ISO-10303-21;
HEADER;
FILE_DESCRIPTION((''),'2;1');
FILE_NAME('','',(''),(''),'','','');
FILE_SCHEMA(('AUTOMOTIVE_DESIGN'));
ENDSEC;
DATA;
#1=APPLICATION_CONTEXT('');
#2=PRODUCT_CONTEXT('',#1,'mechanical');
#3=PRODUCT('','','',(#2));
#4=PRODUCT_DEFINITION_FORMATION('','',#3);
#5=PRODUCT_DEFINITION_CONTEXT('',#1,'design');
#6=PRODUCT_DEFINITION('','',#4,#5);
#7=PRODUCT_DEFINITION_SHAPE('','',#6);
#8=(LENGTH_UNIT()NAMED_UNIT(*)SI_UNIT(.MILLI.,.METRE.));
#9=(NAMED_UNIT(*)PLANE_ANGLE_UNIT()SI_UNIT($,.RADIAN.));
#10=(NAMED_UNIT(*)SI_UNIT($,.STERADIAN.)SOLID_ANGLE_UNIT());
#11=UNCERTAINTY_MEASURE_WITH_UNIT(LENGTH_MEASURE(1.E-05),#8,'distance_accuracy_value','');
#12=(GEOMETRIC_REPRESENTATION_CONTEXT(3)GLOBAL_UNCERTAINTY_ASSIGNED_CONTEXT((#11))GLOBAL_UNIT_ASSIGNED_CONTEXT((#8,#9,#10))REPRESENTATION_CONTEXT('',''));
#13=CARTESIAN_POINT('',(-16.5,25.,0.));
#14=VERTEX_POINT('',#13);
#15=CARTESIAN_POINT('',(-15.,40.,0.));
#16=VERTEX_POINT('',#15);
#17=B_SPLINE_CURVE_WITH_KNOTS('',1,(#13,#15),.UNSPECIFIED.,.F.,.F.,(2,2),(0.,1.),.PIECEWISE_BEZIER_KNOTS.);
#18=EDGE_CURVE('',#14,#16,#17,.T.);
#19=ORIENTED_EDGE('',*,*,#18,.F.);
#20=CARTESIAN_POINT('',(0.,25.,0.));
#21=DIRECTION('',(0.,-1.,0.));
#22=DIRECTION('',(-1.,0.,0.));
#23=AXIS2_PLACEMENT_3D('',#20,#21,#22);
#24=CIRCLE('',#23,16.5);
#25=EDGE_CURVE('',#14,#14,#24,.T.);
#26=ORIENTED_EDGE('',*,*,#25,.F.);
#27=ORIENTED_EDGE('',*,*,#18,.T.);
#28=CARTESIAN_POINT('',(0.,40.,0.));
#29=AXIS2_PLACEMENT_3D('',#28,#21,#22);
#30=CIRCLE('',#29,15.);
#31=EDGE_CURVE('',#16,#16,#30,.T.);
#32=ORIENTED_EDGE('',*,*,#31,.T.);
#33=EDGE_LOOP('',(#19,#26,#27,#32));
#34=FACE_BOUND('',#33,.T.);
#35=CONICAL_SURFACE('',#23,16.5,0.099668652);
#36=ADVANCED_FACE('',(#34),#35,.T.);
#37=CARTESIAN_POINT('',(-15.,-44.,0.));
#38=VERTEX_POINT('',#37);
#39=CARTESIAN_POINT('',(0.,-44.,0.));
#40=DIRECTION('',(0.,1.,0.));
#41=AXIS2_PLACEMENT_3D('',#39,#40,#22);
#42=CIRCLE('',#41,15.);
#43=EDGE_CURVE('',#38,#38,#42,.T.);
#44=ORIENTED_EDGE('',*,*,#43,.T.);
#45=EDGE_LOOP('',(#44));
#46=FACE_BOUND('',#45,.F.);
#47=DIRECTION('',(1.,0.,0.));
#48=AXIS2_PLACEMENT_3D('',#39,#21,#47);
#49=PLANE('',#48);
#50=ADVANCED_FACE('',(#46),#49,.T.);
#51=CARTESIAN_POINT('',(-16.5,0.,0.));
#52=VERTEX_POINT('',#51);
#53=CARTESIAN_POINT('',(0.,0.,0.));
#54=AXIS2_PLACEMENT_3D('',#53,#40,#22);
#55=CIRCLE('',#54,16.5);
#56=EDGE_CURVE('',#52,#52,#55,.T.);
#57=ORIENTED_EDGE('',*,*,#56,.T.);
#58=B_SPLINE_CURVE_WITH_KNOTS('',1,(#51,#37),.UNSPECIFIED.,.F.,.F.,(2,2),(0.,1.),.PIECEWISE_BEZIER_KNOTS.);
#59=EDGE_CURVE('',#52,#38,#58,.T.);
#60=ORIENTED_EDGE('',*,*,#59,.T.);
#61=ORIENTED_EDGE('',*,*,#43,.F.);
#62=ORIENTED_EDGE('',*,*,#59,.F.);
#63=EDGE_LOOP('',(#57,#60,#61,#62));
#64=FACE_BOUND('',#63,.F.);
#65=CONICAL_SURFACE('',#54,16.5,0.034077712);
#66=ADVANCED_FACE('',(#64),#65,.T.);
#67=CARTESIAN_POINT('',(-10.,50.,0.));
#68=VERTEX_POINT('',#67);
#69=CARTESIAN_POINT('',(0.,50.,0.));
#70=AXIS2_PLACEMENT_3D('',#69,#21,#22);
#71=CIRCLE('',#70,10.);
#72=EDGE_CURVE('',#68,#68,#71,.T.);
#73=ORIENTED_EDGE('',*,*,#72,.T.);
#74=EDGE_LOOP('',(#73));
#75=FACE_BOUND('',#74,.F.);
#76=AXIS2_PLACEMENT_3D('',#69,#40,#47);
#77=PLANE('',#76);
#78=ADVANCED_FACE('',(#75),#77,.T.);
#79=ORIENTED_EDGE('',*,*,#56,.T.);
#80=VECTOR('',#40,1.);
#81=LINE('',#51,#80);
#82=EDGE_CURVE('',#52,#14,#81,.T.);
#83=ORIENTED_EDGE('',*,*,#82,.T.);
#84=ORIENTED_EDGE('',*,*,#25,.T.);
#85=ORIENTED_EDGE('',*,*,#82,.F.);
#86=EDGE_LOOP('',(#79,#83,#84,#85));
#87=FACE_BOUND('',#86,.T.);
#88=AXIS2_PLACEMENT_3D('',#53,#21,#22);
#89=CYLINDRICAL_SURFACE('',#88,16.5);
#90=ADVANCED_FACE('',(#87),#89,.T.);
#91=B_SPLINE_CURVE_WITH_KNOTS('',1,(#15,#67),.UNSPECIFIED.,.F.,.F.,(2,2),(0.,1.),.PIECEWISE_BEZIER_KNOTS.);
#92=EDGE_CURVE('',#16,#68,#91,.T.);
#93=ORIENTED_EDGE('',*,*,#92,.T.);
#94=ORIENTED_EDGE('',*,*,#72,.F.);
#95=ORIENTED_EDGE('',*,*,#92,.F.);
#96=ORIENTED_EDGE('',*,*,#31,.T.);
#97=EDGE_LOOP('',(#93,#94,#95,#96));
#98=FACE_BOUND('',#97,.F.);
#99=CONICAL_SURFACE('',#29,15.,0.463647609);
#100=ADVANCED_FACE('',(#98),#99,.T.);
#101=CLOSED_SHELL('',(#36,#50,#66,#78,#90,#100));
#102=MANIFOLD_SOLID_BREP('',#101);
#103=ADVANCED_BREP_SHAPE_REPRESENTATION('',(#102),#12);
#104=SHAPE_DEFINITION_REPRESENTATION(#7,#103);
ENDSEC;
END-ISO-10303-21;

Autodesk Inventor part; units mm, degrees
sketch "Sketch1" plane through (0, 0, 0) normal (0, 1, 0) x (-1, 0, 0)
  circle A0 centre (0, 0) radius 16.5
  dimension "d0" = 33
extrude "Extrusion1" add sketch "Sketch1" along normal blind 25
ref_plane "Work Plane1" through (0, -44, 0) normal (0, -1, 0) x (1, 0, 0)
sketch "Sketch2" plane through (0, -44, 0) normal (0, -1, 0) x (1, 0, 0)
  circle A0 centre (0, 0) radius 15
  dimension "d4" = 30
loft "Loft1" add profiles "Sketch2" section 1 edges at (16.5, 0, 0)
ref_plane "Work Plane2" through (0, 40, 0) normal (0, 1, 0) x (1, 0, 0)
sketch "Sketch3" plane through (0, 40, 0) normal (0, 1, 0) x (1, 0, 0)
  circle A0 centre (0, 0) radius 15
  dimension "d10" = 30
loft "Loft2" add profiles "Sketch3" section 1 edges at (16.5, 25, 0)
ref_plane "Work Plane3" through (0, 50, 0) normal (0, 1, 0) x (1, 0, 0)
sketch "Sketch4" plane through (0, 50, 0) normal (0, 1, 0) x (1, 0, 0)
  circle A0 centre (0, 0) radius 10
  dimension "d16" = 20
loft "Loft3" add profiles "Sketch4" section 1 edges at (15, 40, 0)
properties part number "USBCamera"
